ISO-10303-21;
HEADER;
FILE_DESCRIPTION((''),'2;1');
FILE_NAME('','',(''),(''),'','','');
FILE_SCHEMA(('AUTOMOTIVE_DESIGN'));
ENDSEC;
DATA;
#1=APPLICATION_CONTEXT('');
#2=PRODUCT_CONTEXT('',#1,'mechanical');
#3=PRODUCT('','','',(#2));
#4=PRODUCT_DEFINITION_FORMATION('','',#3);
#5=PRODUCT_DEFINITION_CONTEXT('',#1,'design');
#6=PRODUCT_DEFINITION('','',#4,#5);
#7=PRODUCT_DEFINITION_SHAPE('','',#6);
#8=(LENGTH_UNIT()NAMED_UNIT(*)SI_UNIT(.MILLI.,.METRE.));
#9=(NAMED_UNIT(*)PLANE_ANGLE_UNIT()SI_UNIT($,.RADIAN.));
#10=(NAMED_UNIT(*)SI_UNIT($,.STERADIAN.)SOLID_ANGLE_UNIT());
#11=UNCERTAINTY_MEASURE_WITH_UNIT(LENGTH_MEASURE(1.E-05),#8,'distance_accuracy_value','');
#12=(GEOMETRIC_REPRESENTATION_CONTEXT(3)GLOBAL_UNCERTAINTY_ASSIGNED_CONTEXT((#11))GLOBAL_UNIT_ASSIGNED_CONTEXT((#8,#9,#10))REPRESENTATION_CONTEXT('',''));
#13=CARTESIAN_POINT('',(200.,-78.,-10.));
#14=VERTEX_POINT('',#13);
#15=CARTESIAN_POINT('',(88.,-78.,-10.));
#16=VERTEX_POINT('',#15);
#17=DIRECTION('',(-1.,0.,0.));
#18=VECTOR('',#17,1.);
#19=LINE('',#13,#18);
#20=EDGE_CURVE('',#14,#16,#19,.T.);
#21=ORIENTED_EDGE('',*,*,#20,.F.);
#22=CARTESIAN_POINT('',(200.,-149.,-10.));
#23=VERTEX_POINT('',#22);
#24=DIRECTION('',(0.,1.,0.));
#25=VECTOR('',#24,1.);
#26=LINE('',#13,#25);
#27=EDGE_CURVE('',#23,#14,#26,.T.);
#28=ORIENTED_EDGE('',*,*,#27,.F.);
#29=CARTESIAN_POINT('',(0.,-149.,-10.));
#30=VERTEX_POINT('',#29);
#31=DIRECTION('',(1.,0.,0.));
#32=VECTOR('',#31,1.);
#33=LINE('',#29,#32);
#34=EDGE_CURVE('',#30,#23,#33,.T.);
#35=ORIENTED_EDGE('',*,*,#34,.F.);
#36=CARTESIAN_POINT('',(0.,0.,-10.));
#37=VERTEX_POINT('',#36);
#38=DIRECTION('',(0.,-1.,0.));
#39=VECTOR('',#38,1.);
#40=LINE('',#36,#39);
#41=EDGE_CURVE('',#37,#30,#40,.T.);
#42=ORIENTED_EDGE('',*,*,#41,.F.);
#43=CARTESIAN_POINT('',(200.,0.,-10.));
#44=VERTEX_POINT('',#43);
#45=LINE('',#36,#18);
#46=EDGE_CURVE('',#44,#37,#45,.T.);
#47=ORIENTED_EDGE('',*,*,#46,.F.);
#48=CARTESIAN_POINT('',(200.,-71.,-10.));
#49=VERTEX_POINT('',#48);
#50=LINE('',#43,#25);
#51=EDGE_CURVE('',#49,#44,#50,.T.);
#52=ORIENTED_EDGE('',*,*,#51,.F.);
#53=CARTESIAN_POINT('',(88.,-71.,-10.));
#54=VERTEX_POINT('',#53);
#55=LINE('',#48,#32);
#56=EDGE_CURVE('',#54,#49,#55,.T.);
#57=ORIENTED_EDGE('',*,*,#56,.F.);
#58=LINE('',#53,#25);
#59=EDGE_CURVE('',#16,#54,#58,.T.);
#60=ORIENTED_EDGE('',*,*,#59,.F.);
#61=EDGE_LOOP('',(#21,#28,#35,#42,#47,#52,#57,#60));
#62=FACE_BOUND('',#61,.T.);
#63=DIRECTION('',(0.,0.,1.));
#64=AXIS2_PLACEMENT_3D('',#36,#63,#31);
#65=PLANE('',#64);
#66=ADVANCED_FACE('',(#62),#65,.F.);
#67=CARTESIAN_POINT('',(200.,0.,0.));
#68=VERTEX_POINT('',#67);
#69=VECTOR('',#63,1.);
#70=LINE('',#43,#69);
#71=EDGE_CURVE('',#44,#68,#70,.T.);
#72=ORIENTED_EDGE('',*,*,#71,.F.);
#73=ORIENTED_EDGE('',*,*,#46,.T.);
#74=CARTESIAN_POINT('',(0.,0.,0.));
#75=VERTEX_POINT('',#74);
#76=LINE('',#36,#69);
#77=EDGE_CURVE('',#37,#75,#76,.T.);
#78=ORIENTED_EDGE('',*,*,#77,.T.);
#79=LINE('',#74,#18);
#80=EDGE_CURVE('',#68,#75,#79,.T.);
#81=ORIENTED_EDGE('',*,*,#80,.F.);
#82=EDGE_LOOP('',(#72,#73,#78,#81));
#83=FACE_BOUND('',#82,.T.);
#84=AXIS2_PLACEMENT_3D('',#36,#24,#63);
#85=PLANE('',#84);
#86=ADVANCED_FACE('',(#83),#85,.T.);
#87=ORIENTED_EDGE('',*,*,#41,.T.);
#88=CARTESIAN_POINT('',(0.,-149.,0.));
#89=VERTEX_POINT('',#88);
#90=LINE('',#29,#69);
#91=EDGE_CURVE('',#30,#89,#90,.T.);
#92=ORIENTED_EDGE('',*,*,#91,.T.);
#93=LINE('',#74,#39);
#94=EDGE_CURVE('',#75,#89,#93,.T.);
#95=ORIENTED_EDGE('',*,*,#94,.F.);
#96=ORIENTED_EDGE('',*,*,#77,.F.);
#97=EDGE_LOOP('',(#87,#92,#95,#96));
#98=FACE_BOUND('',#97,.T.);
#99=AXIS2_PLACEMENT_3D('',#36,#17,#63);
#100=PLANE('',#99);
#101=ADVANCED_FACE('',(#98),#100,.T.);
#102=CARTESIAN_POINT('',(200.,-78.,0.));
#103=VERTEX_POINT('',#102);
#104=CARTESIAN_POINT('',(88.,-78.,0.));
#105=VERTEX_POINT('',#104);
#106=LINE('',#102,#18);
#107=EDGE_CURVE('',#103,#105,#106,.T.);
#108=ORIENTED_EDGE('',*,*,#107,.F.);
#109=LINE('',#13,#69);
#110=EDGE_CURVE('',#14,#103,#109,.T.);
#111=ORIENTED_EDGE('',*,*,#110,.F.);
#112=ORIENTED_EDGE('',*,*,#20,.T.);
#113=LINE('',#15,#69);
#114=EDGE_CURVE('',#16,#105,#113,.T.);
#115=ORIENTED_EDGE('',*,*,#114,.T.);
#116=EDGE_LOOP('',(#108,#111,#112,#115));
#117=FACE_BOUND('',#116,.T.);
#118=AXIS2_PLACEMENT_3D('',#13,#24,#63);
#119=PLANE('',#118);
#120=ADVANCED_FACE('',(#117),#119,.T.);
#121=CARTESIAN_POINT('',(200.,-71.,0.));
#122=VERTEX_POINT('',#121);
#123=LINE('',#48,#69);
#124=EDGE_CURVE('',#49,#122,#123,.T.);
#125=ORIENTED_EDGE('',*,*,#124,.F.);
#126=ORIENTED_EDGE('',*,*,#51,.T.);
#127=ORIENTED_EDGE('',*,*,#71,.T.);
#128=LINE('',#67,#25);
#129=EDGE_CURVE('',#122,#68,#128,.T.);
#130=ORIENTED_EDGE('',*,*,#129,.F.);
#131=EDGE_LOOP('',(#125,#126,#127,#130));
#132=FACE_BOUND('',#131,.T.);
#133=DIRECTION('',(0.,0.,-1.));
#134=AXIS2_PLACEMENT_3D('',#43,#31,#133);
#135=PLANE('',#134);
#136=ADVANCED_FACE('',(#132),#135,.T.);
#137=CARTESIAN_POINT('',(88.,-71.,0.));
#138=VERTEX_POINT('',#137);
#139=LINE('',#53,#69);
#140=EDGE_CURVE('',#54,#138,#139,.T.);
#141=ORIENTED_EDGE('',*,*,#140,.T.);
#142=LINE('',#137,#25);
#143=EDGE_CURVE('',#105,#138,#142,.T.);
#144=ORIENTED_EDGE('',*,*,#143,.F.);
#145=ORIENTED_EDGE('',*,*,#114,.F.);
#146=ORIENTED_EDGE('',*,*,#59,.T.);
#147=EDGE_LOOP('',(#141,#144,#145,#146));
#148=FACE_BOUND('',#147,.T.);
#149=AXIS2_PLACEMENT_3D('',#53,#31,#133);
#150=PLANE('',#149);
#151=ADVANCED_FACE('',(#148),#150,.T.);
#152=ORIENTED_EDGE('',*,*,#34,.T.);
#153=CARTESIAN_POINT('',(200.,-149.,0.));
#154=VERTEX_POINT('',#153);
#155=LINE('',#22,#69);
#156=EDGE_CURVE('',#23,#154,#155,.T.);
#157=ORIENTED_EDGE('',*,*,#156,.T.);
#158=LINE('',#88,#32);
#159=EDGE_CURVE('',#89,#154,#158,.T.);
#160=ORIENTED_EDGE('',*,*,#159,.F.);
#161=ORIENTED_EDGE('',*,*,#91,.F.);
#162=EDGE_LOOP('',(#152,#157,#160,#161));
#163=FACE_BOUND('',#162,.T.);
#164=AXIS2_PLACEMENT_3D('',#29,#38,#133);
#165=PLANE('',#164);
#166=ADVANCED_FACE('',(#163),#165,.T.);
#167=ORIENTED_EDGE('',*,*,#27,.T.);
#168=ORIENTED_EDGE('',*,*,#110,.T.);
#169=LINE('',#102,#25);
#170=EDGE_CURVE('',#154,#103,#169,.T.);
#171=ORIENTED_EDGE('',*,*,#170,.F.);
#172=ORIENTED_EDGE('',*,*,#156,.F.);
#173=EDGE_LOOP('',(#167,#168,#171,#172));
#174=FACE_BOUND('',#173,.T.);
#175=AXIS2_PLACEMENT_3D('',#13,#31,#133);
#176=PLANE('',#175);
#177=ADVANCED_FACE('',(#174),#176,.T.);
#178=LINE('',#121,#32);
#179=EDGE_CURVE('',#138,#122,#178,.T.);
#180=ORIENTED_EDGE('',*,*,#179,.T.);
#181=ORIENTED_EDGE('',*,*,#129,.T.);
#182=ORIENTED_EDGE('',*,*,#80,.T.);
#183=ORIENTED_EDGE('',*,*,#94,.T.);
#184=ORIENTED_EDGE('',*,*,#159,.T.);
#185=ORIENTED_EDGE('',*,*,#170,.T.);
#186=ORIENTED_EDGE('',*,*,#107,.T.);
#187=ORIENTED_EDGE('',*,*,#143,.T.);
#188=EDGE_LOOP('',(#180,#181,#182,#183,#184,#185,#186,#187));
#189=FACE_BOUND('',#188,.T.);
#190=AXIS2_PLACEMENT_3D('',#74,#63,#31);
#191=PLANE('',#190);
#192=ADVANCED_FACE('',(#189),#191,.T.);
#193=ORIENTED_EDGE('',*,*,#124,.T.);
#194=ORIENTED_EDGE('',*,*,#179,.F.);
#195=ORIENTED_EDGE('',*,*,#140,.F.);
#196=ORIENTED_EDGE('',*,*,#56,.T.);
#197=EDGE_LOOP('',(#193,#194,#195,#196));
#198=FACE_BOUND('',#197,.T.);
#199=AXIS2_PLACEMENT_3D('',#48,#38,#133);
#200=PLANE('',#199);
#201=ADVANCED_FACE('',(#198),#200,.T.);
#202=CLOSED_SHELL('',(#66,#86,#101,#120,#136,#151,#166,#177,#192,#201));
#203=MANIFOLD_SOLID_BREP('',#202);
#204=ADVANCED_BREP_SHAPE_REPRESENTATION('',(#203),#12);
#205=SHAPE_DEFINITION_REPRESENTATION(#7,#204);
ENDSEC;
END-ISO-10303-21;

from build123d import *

# Parameters (mm, degrees)
SM_BASE_FLANGE_1_DEPTH = 10


# Sheet-metal steps are written as plain solids
with BuildPart() as part:
    # Sketch 1 → Базовая кромка1 (new body)
    with BuildSketch(Plane.XY):
        Polygon((200, -78), (200, -149), (0, -149), (0, 0), (200, 0), (200, -71), (88, -71), (88, -78), align=None)
    extrude(amount=-SM_BASE_FLANGE_1_DEPTH)


solid = part.part
